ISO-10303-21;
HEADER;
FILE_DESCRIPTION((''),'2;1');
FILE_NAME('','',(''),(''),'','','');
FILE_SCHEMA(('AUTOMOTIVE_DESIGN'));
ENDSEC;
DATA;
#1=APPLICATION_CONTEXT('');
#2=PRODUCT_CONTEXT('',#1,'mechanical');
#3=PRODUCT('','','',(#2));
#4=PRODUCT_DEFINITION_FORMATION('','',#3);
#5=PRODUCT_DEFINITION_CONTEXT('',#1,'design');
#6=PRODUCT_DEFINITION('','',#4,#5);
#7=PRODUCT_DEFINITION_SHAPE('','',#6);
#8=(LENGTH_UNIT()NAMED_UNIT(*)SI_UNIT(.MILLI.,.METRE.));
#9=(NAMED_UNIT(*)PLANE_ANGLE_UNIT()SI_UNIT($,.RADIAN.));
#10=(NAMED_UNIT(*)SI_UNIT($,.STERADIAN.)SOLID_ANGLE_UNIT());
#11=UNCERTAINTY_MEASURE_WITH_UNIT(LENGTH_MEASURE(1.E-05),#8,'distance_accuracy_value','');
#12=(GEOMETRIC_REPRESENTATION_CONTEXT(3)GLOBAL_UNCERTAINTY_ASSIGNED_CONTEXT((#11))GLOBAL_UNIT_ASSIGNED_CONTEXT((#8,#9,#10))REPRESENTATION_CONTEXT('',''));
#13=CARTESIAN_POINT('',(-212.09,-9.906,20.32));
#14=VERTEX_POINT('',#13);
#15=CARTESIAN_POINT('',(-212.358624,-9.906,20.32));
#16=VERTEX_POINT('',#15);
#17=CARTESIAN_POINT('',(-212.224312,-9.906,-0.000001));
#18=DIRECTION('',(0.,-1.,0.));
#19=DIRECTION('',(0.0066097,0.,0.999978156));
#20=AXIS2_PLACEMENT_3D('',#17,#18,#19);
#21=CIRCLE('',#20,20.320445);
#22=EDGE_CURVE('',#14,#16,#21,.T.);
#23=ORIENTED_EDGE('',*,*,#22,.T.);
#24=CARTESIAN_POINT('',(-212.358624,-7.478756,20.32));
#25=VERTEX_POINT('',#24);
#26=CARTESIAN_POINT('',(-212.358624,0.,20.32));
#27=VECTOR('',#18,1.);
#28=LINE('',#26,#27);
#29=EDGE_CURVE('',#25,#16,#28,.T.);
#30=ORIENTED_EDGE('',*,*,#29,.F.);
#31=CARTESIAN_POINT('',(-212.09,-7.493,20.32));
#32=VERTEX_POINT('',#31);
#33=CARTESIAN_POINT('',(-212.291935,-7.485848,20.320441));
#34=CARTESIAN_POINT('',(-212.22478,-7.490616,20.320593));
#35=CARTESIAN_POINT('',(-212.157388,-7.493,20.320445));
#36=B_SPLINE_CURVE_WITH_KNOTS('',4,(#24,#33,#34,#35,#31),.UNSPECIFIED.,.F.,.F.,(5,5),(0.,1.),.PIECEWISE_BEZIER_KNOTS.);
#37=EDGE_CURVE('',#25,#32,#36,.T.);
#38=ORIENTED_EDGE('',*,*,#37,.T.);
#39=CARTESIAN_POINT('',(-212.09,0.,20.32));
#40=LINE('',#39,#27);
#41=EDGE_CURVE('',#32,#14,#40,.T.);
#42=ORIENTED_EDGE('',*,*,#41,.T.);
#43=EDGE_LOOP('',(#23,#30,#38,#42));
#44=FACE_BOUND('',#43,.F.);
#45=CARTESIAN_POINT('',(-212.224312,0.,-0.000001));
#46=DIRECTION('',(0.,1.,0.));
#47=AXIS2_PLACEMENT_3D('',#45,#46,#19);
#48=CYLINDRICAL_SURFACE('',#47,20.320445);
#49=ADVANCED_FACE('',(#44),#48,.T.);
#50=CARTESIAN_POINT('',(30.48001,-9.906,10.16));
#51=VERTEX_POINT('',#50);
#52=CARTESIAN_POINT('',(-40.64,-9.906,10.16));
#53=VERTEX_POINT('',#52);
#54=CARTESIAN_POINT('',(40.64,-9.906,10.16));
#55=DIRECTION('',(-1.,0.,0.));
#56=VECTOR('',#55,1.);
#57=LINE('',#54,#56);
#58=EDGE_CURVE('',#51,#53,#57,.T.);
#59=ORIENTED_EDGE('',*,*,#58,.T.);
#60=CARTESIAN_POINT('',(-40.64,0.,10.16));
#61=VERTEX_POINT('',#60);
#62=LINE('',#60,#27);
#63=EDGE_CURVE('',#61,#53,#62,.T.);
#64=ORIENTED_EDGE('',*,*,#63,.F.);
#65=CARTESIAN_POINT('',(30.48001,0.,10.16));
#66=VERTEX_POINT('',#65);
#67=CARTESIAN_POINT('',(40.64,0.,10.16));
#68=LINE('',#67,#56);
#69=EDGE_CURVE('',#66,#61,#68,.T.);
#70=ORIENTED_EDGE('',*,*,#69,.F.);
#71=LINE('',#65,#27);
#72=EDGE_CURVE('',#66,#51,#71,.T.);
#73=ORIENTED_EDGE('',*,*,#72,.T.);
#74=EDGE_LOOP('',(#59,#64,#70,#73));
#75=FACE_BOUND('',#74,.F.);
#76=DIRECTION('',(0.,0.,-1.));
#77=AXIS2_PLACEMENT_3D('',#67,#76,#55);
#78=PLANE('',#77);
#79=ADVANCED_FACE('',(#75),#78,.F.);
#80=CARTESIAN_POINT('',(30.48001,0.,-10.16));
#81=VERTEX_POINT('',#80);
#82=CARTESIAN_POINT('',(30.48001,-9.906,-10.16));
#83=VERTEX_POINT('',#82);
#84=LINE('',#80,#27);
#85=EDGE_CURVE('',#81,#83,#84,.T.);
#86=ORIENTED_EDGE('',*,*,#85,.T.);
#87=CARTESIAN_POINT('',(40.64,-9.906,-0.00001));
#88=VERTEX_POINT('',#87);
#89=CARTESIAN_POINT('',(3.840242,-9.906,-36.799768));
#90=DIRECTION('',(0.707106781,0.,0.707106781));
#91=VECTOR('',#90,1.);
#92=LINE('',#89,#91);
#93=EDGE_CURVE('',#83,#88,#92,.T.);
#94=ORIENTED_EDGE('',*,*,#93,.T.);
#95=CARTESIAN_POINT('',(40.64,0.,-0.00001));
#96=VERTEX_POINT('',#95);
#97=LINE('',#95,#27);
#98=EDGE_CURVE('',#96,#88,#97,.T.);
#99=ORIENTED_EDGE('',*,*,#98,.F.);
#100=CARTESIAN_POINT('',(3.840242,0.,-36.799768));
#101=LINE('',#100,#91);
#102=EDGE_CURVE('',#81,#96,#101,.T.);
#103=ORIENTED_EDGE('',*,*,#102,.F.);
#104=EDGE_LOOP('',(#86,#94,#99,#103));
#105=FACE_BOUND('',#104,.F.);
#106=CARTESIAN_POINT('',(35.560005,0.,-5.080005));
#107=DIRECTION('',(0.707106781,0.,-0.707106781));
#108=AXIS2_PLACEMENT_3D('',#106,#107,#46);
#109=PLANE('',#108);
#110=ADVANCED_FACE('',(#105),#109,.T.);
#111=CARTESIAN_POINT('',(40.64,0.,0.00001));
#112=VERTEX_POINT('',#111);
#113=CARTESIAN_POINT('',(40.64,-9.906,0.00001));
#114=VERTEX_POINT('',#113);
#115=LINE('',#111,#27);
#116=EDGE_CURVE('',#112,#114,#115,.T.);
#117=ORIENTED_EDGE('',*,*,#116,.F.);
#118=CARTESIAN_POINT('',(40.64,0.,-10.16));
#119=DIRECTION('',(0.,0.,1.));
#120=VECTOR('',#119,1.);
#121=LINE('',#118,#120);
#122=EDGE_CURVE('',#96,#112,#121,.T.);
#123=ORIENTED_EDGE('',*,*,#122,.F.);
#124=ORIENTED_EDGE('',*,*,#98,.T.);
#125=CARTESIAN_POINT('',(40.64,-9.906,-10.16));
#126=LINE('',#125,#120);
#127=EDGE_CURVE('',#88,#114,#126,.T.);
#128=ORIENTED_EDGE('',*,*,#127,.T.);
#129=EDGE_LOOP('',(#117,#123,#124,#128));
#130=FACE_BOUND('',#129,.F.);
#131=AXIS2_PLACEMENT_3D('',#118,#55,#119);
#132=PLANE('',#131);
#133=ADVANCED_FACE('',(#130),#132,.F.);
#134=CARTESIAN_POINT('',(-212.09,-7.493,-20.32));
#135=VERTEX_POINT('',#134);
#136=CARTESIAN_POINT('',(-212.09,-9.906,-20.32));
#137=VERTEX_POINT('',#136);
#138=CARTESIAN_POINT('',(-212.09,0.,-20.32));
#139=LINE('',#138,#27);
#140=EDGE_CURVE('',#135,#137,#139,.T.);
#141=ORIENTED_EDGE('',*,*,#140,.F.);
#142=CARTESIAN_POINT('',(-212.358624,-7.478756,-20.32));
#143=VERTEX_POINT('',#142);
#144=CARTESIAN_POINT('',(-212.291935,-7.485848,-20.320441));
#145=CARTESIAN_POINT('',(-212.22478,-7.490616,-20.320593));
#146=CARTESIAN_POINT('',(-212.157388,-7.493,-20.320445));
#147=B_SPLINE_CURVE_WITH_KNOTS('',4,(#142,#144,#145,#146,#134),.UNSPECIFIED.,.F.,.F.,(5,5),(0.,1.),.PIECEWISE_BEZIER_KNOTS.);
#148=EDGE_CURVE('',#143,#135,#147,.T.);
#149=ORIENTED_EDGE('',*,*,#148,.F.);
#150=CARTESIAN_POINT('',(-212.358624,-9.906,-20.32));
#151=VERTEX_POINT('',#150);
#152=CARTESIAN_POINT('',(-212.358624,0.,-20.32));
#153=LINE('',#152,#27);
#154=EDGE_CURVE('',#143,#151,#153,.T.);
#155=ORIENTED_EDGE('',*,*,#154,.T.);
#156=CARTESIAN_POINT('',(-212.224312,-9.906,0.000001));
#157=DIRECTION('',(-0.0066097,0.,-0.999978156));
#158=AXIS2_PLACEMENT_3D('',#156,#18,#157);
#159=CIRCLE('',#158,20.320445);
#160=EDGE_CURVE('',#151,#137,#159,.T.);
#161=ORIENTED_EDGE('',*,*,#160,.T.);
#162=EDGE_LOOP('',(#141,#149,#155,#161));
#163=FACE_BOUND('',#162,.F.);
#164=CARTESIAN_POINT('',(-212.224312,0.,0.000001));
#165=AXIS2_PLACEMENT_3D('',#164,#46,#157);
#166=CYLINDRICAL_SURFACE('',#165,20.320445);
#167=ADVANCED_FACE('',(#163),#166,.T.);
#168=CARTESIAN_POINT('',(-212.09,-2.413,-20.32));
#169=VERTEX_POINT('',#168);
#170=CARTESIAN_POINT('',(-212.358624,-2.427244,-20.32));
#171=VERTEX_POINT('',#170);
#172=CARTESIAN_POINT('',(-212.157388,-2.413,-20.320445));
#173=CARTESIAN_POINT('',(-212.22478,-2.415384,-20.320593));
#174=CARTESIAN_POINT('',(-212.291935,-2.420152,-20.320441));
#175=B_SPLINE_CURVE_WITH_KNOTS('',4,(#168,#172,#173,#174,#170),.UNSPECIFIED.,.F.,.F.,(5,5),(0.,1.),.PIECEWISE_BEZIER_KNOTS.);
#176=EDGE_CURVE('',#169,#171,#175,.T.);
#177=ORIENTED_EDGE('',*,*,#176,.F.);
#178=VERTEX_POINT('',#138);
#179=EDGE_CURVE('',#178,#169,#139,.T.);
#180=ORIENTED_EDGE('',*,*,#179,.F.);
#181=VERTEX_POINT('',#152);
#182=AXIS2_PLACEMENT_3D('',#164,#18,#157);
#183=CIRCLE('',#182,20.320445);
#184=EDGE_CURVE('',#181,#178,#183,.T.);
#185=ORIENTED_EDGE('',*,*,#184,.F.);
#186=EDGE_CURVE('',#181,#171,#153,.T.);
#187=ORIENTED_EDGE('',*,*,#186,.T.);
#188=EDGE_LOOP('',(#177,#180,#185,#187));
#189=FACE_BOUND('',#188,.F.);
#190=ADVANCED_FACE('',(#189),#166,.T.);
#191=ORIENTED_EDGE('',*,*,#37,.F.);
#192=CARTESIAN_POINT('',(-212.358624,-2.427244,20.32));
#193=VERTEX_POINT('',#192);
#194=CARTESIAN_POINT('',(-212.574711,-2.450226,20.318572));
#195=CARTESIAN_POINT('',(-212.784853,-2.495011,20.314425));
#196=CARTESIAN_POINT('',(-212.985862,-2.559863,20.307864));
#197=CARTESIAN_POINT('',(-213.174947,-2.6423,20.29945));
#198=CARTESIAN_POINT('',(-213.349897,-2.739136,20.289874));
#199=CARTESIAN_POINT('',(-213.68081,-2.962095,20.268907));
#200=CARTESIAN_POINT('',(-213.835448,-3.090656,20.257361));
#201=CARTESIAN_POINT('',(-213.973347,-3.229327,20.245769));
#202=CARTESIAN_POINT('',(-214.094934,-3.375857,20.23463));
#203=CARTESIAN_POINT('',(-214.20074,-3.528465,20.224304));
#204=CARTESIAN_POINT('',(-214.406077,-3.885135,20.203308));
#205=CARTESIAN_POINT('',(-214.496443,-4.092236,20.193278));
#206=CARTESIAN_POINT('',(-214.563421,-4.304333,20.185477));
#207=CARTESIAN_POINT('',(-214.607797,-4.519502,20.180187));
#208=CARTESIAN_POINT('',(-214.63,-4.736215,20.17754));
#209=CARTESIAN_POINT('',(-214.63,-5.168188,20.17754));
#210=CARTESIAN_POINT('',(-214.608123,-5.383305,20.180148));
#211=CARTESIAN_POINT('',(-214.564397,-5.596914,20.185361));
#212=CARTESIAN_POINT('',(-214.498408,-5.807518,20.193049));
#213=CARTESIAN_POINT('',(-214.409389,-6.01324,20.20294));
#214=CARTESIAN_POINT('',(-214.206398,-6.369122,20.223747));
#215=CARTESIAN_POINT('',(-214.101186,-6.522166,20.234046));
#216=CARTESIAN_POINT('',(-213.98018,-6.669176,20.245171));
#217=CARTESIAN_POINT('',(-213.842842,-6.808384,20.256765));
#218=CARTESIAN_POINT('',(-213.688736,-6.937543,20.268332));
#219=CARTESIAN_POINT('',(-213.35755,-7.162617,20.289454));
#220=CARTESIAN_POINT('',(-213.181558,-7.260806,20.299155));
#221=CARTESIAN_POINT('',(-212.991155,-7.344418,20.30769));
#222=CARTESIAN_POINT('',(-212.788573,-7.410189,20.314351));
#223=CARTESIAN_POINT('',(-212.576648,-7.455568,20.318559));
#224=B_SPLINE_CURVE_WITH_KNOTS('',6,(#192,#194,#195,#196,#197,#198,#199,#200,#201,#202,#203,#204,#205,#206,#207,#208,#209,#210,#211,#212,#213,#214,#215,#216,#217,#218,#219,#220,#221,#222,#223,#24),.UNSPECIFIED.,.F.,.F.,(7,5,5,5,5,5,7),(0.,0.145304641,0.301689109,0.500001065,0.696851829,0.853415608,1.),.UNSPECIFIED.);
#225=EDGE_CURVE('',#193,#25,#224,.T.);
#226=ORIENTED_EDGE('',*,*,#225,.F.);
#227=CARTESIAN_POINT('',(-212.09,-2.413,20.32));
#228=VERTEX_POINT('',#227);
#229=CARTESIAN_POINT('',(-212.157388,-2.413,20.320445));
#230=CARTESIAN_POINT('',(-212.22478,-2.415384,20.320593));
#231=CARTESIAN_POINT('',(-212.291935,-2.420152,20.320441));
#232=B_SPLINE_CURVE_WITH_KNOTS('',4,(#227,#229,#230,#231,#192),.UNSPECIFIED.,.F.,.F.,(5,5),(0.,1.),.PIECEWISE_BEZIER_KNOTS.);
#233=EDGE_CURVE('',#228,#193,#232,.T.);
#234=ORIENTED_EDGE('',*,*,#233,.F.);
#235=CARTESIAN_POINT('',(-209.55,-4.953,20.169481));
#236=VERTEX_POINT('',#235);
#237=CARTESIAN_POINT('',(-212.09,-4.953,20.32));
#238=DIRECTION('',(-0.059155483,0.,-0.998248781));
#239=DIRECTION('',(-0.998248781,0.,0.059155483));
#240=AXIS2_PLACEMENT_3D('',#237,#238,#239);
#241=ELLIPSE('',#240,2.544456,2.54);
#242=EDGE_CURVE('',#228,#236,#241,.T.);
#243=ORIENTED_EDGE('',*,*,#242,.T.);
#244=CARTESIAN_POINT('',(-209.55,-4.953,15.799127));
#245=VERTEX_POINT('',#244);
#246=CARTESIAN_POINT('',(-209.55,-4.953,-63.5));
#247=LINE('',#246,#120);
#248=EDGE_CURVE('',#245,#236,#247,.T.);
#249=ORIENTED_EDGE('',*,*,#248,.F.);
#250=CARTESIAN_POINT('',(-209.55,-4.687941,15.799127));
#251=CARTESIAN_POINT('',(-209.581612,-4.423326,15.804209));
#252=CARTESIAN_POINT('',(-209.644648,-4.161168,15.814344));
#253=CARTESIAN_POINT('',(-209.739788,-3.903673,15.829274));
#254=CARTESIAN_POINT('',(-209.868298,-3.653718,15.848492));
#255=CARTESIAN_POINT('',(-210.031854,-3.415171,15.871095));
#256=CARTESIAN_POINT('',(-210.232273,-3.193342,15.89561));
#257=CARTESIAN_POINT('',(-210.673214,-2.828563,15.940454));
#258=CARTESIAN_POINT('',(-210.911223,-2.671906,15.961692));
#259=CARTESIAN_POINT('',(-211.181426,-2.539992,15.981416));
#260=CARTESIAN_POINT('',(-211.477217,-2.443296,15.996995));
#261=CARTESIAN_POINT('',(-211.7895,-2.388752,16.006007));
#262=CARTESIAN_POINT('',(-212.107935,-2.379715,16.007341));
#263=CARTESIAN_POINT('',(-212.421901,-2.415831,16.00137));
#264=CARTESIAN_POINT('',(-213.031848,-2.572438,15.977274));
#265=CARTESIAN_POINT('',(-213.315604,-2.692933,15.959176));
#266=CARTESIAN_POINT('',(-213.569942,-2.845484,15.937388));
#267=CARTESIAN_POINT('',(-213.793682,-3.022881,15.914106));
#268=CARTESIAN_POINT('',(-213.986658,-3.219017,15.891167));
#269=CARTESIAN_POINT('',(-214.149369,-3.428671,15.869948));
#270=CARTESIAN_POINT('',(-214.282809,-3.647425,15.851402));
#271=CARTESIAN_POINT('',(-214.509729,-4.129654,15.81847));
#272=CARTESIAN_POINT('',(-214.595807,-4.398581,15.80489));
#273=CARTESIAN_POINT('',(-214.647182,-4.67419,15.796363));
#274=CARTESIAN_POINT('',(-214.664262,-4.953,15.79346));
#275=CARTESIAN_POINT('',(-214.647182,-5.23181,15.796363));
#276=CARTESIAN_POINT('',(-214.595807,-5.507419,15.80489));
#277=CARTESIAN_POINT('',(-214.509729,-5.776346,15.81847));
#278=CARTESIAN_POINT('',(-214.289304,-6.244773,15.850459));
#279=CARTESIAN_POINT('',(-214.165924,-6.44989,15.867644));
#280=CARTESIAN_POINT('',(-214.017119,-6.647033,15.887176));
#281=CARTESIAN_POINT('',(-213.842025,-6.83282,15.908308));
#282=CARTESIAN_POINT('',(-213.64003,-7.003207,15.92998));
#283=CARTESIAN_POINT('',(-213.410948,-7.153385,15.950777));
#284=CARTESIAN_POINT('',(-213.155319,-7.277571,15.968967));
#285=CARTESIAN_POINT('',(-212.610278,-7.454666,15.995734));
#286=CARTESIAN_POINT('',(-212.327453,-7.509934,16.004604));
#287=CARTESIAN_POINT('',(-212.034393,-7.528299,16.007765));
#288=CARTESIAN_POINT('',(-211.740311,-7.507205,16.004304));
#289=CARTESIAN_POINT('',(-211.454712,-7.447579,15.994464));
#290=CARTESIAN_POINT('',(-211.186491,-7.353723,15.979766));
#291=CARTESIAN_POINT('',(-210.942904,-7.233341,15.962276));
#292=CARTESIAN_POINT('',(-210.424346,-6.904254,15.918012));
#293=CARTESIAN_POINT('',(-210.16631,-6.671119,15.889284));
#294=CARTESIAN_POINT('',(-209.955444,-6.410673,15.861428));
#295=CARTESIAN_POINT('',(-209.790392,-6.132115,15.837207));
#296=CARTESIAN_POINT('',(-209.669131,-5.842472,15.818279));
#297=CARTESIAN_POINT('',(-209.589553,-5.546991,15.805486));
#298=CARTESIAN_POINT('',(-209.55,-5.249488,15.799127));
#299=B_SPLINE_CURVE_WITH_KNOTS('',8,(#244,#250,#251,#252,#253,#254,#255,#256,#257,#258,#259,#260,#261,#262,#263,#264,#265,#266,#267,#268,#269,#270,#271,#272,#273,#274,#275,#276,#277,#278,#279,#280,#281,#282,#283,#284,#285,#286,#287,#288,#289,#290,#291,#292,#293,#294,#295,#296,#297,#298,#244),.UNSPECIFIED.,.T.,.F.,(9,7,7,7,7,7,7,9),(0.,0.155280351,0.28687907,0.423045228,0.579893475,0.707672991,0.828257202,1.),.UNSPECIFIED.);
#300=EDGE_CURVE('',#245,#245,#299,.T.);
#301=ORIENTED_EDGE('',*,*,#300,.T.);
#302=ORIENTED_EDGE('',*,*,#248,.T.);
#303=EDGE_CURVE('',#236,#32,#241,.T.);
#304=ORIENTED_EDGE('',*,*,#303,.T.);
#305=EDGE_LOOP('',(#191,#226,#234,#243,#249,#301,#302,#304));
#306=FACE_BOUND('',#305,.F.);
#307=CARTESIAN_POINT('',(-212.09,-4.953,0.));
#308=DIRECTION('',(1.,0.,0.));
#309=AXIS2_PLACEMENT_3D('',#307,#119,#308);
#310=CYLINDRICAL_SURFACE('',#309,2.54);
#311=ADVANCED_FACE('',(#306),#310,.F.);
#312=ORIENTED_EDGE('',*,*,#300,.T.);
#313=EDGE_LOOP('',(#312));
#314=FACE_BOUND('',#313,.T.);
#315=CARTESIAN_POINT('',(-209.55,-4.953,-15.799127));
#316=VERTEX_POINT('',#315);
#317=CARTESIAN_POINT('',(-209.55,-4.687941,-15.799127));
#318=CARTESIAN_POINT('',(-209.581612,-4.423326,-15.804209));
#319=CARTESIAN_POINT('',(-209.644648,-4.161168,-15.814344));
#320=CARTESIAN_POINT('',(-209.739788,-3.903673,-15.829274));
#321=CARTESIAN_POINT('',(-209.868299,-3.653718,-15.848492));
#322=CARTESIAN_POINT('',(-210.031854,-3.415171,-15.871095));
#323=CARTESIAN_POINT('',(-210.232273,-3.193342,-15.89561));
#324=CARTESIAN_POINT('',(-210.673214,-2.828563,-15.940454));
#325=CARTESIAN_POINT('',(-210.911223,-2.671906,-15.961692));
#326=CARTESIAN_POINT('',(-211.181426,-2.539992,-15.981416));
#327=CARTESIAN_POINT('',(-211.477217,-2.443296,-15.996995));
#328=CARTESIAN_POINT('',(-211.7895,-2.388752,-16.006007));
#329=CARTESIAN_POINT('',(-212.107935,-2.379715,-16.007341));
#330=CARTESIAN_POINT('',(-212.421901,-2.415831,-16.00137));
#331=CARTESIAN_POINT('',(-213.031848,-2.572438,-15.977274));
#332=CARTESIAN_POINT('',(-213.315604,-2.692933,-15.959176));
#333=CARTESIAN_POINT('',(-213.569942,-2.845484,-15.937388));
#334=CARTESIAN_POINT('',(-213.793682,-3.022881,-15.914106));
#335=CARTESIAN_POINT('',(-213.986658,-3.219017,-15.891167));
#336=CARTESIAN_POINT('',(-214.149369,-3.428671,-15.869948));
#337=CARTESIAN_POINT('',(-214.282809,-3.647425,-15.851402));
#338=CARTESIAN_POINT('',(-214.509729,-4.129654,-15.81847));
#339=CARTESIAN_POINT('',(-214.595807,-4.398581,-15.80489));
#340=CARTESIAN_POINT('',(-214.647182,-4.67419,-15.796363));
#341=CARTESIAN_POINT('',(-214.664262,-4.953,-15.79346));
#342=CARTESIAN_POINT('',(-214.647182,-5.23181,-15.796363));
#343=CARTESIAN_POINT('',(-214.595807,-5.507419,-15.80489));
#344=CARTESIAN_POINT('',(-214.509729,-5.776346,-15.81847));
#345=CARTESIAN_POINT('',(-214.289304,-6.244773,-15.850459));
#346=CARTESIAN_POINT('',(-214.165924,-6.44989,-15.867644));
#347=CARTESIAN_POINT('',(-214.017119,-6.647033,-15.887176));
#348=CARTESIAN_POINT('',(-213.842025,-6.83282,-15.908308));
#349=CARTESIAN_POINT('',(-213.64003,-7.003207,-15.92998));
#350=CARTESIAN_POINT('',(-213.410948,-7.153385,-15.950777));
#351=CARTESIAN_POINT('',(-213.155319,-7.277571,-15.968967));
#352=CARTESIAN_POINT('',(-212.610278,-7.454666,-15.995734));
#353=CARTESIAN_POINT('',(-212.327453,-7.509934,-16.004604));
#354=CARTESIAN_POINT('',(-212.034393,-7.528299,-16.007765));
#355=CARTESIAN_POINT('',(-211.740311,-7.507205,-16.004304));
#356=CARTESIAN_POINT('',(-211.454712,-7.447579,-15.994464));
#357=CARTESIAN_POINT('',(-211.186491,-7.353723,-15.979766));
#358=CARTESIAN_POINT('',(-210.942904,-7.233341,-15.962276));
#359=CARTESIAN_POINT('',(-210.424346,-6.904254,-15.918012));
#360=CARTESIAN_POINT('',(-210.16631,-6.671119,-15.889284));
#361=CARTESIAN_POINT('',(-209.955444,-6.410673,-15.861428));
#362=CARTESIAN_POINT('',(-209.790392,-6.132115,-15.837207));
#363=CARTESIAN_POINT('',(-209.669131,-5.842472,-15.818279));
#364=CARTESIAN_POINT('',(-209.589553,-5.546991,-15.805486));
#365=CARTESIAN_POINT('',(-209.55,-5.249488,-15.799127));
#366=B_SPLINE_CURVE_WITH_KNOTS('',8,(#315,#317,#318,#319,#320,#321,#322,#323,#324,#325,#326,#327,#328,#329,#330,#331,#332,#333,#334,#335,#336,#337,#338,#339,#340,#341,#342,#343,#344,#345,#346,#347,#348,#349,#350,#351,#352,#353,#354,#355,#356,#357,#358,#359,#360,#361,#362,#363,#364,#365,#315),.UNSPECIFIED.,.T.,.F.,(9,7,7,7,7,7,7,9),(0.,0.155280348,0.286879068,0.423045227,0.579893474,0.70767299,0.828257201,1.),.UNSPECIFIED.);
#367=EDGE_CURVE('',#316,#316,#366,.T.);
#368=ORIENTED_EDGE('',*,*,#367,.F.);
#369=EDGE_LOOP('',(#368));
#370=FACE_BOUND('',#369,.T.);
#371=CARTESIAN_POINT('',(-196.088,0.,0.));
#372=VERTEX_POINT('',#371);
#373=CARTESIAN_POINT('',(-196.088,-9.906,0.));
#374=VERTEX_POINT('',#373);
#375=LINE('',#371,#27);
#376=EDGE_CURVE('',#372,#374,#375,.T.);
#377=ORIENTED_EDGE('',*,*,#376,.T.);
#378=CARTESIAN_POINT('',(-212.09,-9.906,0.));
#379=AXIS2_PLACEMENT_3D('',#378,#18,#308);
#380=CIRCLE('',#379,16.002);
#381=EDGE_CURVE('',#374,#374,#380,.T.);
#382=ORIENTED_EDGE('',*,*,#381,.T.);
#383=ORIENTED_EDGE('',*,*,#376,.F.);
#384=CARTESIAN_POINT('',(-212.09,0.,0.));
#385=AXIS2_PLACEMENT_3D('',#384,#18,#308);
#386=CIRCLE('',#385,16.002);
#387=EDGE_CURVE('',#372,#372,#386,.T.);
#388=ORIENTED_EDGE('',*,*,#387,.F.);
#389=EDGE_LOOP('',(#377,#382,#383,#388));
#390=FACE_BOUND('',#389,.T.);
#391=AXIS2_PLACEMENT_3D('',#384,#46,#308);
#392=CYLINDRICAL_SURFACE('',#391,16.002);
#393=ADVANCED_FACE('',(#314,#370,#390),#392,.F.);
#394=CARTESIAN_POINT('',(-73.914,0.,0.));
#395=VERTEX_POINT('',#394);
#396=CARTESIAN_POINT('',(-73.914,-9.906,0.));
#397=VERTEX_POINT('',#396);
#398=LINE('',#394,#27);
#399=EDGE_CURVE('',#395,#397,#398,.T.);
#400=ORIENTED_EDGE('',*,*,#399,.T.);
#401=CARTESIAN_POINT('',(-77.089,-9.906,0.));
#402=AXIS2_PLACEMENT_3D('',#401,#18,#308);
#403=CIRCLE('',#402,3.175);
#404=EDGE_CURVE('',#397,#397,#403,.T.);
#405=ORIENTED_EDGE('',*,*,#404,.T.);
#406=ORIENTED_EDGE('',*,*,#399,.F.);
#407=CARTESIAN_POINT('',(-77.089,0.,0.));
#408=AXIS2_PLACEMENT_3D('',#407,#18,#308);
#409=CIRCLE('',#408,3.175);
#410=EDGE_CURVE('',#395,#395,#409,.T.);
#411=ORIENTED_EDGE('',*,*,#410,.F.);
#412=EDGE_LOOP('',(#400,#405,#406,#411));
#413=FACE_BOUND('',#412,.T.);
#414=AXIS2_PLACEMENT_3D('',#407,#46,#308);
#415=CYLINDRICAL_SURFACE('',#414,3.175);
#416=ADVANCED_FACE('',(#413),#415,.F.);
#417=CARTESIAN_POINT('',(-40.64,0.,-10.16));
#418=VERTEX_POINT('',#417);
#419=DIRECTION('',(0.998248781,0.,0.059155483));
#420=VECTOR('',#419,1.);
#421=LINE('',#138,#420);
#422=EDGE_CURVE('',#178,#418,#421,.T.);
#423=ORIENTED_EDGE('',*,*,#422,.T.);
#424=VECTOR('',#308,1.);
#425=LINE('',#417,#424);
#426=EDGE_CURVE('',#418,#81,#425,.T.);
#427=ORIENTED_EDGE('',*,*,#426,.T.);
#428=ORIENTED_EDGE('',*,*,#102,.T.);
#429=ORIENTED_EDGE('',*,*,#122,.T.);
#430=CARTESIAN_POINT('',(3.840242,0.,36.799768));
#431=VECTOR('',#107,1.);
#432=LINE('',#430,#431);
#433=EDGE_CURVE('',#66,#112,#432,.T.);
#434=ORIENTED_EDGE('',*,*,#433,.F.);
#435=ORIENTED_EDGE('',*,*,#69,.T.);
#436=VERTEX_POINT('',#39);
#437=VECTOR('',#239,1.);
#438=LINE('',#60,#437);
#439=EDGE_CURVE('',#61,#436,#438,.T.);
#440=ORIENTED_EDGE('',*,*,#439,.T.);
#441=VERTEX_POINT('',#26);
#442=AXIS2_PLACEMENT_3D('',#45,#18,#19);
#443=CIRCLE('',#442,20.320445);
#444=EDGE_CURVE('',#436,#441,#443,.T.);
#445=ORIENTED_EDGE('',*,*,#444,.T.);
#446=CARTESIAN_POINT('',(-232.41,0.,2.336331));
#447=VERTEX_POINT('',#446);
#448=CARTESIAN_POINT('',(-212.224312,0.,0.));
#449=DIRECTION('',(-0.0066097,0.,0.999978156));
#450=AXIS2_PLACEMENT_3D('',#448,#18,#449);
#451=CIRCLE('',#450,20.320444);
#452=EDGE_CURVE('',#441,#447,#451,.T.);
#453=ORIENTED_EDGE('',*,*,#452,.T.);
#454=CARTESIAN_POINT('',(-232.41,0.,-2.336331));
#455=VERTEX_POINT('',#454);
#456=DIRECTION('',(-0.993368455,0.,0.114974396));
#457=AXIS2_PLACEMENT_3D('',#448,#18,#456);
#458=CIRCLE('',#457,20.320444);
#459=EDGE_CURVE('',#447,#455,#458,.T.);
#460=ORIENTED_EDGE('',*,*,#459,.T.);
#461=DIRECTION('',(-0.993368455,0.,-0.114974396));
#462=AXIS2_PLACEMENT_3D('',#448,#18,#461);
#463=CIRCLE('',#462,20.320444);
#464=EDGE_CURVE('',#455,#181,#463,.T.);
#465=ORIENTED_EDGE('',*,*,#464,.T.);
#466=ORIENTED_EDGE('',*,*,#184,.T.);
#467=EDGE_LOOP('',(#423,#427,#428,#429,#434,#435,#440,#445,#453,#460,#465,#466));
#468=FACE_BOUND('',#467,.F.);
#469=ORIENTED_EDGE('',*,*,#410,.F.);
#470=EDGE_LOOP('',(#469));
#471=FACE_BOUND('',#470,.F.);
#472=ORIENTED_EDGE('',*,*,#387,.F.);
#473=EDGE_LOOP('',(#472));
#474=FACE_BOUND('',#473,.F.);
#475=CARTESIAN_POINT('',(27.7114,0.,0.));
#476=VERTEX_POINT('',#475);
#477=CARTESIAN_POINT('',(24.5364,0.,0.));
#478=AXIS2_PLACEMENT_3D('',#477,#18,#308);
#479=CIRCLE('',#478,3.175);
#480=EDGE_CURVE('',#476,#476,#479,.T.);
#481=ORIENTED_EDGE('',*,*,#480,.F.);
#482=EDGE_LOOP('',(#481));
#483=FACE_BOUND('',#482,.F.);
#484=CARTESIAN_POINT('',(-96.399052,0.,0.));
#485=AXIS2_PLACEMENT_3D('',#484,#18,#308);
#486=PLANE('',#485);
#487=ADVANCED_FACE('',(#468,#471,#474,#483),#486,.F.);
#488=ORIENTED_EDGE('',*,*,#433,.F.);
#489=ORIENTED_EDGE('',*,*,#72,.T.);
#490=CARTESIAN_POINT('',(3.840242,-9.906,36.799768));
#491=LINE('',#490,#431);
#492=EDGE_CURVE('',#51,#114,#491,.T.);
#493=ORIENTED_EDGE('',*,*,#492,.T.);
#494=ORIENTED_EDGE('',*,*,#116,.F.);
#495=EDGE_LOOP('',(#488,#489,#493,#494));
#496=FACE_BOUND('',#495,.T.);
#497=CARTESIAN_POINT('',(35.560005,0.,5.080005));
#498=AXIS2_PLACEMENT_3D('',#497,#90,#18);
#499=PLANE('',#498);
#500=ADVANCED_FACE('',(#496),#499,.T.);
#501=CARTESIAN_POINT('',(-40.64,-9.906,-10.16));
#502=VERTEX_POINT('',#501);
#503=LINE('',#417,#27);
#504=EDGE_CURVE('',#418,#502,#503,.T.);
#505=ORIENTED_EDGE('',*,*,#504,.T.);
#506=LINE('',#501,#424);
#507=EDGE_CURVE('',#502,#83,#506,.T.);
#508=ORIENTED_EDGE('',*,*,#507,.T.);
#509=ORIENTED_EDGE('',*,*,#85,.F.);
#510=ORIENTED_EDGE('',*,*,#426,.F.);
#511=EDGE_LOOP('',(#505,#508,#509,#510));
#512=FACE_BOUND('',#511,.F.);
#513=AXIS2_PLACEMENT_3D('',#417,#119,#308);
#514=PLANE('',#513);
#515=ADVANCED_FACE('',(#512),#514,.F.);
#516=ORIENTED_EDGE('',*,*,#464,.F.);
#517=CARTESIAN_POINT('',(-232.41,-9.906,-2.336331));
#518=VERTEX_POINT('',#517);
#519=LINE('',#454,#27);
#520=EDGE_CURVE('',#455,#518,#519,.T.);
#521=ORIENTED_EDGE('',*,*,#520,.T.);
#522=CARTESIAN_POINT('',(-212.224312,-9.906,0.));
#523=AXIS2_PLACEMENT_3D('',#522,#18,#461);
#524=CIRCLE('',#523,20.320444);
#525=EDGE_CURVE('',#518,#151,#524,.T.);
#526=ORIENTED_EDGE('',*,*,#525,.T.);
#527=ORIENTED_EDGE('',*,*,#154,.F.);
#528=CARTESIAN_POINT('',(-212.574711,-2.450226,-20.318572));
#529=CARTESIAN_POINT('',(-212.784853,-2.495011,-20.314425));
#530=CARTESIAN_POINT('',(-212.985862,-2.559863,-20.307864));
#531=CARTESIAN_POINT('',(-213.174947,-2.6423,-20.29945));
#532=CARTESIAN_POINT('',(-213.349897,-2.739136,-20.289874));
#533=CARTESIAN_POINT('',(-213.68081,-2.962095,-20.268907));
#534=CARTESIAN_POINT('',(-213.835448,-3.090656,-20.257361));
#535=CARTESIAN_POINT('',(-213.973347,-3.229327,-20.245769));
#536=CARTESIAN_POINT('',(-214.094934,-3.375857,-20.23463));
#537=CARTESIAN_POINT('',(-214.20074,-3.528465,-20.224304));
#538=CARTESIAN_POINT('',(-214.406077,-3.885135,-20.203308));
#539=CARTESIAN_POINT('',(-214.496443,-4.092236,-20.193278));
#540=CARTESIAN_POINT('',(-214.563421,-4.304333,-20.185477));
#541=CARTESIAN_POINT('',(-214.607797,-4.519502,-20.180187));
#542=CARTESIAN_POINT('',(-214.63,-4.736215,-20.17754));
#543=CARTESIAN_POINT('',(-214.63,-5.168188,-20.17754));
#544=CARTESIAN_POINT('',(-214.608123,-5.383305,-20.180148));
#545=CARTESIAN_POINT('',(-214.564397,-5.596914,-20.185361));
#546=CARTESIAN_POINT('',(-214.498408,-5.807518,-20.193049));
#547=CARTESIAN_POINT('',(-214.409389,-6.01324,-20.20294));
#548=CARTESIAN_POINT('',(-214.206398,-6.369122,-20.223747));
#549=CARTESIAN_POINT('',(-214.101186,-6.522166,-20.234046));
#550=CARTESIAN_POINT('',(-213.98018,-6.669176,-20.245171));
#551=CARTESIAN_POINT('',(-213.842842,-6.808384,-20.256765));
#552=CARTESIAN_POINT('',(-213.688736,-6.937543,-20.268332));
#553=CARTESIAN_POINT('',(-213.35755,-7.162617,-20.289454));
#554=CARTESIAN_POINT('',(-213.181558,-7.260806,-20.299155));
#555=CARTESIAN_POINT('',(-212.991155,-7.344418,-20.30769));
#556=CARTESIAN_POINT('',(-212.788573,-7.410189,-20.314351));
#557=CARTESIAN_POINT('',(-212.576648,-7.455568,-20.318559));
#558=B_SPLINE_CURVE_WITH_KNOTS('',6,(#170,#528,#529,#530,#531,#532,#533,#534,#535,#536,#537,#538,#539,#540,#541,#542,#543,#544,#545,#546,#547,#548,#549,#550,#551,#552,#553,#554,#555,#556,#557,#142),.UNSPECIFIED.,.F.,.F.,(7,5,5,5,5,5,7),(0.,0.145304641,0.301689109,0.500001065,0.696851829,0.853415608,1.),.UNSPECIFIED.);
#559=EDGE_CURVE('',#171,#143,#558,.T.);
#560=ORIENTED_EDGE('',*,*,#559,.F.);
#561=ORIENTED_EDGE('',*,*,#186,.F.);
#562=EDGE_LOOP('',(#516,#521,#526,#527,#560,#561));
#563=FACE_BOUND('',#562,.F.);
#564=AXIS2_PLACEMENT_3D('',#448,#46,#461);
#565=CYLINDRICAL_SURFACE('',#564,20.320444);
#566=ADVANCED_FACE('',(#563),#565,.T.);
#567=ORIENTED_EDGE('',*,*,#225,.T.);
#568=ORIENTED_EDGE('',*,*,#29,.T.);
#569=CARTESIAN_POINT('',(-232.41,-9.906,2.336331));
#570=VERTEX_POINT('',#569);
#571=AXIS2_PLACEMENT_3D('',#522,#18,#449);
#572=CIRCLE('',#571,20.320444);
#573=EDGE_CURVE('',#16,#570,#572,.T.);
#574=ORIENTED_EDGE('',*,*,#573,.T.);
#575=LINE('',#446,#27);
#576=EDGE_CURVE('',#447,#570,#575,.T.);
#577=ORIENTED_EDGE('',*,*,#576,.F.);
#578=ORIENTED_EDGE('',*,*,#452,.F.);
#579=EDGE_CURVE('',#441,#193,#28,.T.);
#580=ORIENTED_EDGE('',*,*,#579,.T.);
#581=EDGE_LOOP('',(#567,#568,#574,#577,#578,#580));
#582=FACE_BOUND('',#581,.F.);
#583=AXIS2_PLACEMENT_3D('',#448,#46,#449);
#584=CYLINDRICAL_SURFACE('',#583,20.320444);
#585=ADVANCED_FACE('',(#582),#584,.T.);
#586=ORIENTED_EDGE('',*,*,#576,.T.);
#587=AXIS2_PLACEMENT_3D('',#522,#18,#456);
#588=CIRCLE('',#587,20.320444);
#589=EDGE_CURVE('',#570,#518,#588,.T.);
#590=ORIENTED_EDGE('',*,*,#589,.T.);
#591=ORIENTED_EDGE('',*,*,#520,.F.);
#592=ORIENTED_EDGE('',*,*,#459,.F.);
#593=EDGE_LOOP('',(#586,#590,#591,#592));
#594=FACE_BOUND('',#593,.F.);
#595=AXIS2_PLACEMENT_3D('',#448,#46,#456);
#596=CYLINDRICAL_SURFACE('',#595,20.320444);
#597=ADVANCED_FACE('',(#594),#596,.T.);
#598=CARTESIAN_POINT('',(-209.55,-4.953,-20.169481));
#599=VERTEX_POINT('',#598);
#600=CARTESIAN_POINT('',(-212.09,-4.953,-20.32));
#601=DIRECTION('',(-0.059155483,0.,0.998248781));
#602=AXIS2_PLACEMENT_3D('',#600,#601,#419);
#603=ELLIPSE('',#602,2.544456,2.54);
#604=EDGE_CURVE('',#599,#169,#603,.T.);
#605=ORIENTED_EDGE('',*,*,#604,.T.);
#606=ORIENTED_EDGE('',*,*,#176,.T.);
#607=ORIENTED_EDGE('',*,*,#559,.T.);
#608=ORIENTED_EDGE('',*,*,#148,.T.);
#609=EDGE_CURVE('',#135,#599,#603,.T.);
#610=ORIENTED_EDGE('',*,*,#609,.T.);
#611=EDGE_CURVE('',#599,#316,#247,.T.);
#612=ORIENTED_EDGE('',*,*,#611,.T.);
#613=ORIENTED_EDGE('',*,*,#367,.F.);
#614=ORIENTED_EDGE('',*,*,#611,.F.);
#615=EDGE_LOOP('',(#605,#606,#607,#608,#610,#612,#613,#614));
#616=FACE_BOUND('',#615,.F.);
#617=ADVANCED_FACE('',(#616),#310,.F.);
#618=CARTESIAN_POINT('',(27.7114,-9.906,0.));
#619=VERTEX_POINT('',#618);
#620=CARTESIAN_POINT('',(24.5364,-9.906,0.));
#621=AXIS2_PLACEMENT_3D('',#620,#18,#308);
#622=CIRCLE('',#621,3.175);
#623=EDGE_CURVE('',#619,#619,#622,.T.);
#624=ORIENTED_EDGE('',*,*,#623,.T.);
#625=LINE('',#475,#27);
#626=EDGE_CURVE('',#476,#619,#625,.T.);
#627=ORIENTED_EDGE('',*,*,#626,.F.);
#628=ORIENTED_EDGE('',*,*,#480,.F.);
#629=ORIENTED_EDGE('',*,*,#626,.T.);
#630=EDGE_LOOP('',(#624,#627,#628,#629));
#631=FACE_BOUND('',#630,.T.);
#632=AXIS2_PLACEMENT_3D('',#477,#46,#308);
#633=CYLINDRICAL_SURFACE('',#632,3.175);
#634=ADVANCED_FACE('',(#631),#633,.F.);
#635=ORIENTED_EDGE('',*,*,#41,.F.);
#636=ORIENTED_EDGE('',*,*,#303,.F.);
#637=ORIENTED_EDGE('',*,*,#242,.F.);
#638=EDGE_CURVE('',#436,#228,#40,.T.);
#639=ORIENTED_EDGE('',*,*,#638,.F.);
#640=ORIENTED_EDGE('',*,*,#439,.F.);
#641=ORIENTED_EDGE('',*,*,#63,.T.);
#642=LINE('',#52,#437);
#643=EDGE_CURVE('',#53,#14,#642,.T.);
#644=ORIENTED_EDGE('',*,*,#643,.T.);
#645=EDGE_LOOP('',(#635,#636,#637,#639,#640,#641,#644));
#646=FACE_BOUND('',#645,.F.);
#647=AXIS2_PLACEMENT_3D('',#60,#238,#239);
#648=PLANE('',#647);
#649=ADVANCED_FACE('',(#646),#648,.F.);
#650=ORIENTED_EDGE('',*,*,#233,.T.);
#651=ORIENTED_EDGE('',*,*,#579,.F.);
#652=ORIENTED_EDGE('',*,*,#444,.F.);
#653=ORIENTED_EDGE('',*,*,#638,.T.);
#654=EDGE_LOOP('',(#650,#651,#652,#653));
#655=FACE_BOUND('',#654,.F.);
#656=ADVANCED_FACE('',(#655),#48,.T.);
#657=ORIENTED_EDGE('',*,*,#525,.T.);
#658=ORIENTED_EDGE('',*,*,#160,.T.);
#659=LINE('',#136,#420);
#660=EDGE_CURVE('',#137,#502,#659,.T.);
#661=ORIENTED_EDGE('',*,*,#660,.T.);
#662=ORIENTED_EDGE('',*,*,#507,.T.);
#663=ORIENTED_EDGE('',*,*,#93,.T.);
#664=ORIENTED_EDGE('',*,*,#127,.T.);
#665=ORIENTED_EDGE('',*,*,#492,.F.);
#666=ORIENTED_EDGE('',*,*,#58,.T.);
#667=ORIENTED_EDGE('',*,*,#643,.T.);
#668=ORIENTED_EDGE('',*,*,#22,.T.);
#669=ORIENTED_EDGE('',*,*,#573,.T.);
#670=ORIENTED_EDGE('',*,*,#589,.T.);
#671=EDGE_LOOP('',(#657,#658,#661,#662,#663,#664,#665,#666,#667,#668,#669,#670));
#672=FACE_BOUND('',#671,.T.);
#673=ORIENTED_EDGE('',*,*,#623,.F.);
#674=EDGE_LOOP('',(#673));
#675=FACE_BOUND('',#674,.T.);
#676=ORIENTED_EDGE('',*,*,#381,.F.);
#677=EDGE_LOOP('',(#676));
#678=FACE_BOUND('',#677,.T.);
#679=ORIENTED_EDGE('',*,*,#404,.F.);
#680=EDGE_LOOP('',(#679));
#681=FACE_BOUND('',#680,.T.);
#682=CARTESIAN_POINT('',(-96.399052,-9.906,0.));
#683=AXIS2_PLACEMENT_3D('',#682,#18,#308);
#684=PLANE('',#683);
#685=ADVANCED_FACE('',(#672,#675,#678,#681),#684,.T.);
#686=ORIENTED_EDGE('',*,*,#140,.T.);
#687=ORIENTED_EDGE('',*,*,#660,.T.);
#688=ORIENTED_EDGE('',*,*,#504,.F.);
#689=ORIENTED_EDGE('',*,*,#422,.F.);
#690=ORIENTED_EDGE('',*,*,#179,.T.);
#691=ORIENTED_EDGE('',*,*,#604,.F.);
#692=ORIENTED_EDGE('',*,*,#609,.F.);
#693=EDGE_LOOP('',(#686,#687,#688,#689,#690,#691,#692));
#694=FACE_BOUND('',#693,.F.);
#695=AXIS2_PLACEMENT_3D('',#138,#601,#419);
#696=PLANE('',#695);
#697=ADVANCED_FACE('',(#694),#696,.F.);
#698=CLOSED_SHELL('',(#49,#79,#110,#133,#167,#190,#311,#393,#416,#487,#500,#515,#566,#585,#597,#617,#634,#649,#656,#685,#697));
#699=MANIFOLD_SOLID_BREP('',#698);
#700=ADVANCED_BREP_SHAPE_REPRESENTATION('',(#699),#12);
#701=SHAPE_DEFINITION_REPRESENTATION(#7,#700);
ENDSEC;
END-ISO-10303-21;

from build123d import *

# Parameters (mm, degrees)
F0_R     = 16.002
F0_R_2   = 3.175
F1_DEPTH = 9.906
F3_R     = 16.002
F3_R_2   = 3.175
F4_DEPTH = 9.906
F6_SIZE  = 10.15999
F7_R     = 2.54
F8_DEPTH = 63.5


# Not quite as in the source:
# - a fillet or chamfer is up to 0.001 mm smaller than in the source, because OpenCascade refuses the exact size


with BuildPart() as f1:
    # F0 (on Front) → F1 (new body)
    with BuildSketch(Plane.XZ):
        with BuildLine():
            Line((-40.64, -10.16), (40.64, -10.16))
            Line((40.64, -10.16), (40.64, 10.16))
            Line((40.64, 10.16), (-40.64, 10.16))
            Line((-40.64, 10.16), (-212.09, 20.32))
            Line((-212.09, 20.32), (-212.3586240849, 20.32))
            ThreePointArc((-212.3586240849, 20.32), (-225.7918722454, 15.1275163151), (-232.41, 2.3363307568))
            Line((-232.41, 2.3363307568), (-232.41, -2.3363307568))
            ThreePointArc((-232.41, -2.3363307568), (-225.7918722455, -15.1275163151), (-212.3586240849, -20.32))
            Line((-212.3586240849, -20.32), (-212.09, -20.32))
            Line((-212.09, -20.32), (-40.64, -10.16))
        make_face()
        with Locations((-212.09, 0)):
            Circle(F0_R, mode=Mode.SUBTRACT)
        with Locations((-77.089, 0)):
            Circle(F0_R_2, mode=Mode.SUBTRACT)
        with Locations((24.5364, 0)):
            Circle(F0_R_2, mode=Mode.SUBTRACT)
        with BuildLine():
            ThreePointArc((-212.3586240849, -20.32), (-212.2243120425, -20.320443886), (-212.09, -20.32))
            Line((-212.09, -20.32), (-212.3586240849, -20.32))
        make_face()
        with BuildLine():
            Line((-212.3586240849, 20.32), (-212.09, 20.32))
            ThreePointArc((-212.09, 20.32), (-212.2243120425, 20.320443886), (-212.3586240849, 20.32))
        make_face()
        with BuildLine():
            ThreePointArc((-232.41, 2.3363307568), (-232.5447559285, 0), (-232.41, -2.3363307568))
            Line((-232.41, -2.3363307568), (-232.41, 2.3363307568))
        make_face()
    extrude(amount=F1_DEPTH)

    # F3 (on face) → F4 (join)
    with BuildSketch(Plane.XZ.offset(9.906)):
        with BuildLine():
            ThreePointArc((-212.09, 20.32), (-232.5447559285, 0), (-212.09, -20.32))
            Line((-212.09, -20.32), (-40.64, -10.16))
            Line((-40.64, -10.16), (40.64, -10.16))
            Line((40.64, -10.16), (40.64, 10.16))
            Line((40.64, 10.16), (-40.64, 10.16))
            Line((-40.64, 10.16), (-212.09, 20.32))
        make_face()
        with Locations((-212.09, 0)):
            Circle(F3_R, mode=Mode.SUBTRACT)
        with Locations((-77.089, 0)):
            Circle(F3_R_2, mode=Mode.SUBTRACT)
        with Locations((24.5364, 0)):
            Circle(F3_R_2, mode=Mode.SUBTRACT)
        Polygon((-192.0276897852, 9.9897326363), (-191.4355526853, 11.4626650533), (-190.8434155854, 12.9355974702), (-161.479297027, 1.1308576164), (-159.3415343892, 0.2714505221), (-138.9796634154, 8.3541679114), (-109.9172381334, 0.2630833417), (-106.984711484, 1.0945316722), (-104.048270324, 0.2770158067), (-101.1118291641, -0.5405000589), (-104.0443558136, -1.3719483894), (-106.976882463, -2.2033967199), (-109.913323623, -1.3858808543), (-138.9771856379, -9.6262491233), (-159.3452632945, -1.4380292869), (-161.4867548376, -2.2881020016), (-163.6245174754, -1.4286949073), (-165.7622801132, -0.5692878129), align=None, mode=Mode.SUBTRACT)
        Polygon((-157.2037717514, -0.5879565723), (-159.3452632945, -1.4380292869), (-138.9771856379, -9.6262491233), (-109.913323623, -1.3858808543), (-112.8497647829, -0.5683649888), (-138.8883433663, -7.9509859432), align=None)
        Polygon((-138.9796634154, 8.3541679114), (-159.3415343892, 0.2714505221), (-157.2037717514, -0.5879565723), (-138.8906361201, 6.6815080074), (-112.8497647829, -0.5683649888), (-109.9172381334, 0.2630833417), align=None)
        Polygon((-190.8434155854, 12.9355974702), (-191.4355526853, 11.4626650533), (-163.6207885701, 0.2807849018), (-161.479297027, 1.1308576164), align=None)
        Polygon((-163.6207885701, 0.2807849018), (-191.4355526853, 11.4626650533), (-192.0276897852, 9.9897326363), (-165.7622801132, -0.5692878129), align=None)
        Polygon((-106.9807969735, -0.5544325238), (-109.913323623, -1.3858808543), (-106.976882463, -2.2033967199), (-104.0443558136, -1.3719483894), align=None)
        Polygon((-112.8497647829, -0.5683649888), (-109.913323623, -1.3858808543), (-106.9807969735, -0.5544325238), (-109.9172381334, 0.2630833417), align=None)
        Polygon((-104.048270324, 0.2770158067), (-106.9807969735, -0.5544325238), (-104.0443558136, -1.3719483894), (-101.1118291641, -0.5405000589), align=None)
        Polygon((-106.984711484, 1.0945316722), (-109.9172381334, 0.2630833417), (-106.9807969735, -0.5544325238), (-104.048270324, 0.2770158067), align=None)
        Polygon((-161.479297027, 1.1308576164), (-163.6207885701, 0.2807849018), (-161.4830259323, -0.5786221926), (-159.3415343892, 0.2714505221), align=None)
        Polygon((-161.4830259323, -0.5786221926), (-163.6207885701, 0.2807849018), (-165.7622801132, -0.5692878129), (-163.6245174754, -1.4286949073), align=None)
        Polygon((-159.3415343892, 0.2714505221), (-161.4830259323, -0.5786221926), (-159.3452632945, -1.4380292869), (-157.2037717514, -0.5879565723), align=None)
        Polygon((-159.3452632945, -1.4380292869), (-161.4830259323, -0.5786221926), (-163.6245174754, -1.4286949073), (-161.4867548376, -2.2881020016), align=None)
    extrude(amount=-F4_DEPTH)

    # F6 (size 10.16 in the source; OpenCascade refuses exactly that, so slightly less here)
    f6_edges = [f1.edges().sort_by_distance(p)[0] for p in [
        (40.64, -4.953, -10.16),
        (40.64, -4.953, 10.16),
    ]]
    chamfer(f6_edges, length=F6_SIZE)

    # F7 (on Top) → F8 (cut, symmetric)
    with BuildSketch(Plane.XY):
        with Locations((-212.09, -4.953)):
            Circle(F7_R)
    extrude(amount=F8_DEPTH, both=True, mode=Mode.SUBTRACT)


solid = f1.part
